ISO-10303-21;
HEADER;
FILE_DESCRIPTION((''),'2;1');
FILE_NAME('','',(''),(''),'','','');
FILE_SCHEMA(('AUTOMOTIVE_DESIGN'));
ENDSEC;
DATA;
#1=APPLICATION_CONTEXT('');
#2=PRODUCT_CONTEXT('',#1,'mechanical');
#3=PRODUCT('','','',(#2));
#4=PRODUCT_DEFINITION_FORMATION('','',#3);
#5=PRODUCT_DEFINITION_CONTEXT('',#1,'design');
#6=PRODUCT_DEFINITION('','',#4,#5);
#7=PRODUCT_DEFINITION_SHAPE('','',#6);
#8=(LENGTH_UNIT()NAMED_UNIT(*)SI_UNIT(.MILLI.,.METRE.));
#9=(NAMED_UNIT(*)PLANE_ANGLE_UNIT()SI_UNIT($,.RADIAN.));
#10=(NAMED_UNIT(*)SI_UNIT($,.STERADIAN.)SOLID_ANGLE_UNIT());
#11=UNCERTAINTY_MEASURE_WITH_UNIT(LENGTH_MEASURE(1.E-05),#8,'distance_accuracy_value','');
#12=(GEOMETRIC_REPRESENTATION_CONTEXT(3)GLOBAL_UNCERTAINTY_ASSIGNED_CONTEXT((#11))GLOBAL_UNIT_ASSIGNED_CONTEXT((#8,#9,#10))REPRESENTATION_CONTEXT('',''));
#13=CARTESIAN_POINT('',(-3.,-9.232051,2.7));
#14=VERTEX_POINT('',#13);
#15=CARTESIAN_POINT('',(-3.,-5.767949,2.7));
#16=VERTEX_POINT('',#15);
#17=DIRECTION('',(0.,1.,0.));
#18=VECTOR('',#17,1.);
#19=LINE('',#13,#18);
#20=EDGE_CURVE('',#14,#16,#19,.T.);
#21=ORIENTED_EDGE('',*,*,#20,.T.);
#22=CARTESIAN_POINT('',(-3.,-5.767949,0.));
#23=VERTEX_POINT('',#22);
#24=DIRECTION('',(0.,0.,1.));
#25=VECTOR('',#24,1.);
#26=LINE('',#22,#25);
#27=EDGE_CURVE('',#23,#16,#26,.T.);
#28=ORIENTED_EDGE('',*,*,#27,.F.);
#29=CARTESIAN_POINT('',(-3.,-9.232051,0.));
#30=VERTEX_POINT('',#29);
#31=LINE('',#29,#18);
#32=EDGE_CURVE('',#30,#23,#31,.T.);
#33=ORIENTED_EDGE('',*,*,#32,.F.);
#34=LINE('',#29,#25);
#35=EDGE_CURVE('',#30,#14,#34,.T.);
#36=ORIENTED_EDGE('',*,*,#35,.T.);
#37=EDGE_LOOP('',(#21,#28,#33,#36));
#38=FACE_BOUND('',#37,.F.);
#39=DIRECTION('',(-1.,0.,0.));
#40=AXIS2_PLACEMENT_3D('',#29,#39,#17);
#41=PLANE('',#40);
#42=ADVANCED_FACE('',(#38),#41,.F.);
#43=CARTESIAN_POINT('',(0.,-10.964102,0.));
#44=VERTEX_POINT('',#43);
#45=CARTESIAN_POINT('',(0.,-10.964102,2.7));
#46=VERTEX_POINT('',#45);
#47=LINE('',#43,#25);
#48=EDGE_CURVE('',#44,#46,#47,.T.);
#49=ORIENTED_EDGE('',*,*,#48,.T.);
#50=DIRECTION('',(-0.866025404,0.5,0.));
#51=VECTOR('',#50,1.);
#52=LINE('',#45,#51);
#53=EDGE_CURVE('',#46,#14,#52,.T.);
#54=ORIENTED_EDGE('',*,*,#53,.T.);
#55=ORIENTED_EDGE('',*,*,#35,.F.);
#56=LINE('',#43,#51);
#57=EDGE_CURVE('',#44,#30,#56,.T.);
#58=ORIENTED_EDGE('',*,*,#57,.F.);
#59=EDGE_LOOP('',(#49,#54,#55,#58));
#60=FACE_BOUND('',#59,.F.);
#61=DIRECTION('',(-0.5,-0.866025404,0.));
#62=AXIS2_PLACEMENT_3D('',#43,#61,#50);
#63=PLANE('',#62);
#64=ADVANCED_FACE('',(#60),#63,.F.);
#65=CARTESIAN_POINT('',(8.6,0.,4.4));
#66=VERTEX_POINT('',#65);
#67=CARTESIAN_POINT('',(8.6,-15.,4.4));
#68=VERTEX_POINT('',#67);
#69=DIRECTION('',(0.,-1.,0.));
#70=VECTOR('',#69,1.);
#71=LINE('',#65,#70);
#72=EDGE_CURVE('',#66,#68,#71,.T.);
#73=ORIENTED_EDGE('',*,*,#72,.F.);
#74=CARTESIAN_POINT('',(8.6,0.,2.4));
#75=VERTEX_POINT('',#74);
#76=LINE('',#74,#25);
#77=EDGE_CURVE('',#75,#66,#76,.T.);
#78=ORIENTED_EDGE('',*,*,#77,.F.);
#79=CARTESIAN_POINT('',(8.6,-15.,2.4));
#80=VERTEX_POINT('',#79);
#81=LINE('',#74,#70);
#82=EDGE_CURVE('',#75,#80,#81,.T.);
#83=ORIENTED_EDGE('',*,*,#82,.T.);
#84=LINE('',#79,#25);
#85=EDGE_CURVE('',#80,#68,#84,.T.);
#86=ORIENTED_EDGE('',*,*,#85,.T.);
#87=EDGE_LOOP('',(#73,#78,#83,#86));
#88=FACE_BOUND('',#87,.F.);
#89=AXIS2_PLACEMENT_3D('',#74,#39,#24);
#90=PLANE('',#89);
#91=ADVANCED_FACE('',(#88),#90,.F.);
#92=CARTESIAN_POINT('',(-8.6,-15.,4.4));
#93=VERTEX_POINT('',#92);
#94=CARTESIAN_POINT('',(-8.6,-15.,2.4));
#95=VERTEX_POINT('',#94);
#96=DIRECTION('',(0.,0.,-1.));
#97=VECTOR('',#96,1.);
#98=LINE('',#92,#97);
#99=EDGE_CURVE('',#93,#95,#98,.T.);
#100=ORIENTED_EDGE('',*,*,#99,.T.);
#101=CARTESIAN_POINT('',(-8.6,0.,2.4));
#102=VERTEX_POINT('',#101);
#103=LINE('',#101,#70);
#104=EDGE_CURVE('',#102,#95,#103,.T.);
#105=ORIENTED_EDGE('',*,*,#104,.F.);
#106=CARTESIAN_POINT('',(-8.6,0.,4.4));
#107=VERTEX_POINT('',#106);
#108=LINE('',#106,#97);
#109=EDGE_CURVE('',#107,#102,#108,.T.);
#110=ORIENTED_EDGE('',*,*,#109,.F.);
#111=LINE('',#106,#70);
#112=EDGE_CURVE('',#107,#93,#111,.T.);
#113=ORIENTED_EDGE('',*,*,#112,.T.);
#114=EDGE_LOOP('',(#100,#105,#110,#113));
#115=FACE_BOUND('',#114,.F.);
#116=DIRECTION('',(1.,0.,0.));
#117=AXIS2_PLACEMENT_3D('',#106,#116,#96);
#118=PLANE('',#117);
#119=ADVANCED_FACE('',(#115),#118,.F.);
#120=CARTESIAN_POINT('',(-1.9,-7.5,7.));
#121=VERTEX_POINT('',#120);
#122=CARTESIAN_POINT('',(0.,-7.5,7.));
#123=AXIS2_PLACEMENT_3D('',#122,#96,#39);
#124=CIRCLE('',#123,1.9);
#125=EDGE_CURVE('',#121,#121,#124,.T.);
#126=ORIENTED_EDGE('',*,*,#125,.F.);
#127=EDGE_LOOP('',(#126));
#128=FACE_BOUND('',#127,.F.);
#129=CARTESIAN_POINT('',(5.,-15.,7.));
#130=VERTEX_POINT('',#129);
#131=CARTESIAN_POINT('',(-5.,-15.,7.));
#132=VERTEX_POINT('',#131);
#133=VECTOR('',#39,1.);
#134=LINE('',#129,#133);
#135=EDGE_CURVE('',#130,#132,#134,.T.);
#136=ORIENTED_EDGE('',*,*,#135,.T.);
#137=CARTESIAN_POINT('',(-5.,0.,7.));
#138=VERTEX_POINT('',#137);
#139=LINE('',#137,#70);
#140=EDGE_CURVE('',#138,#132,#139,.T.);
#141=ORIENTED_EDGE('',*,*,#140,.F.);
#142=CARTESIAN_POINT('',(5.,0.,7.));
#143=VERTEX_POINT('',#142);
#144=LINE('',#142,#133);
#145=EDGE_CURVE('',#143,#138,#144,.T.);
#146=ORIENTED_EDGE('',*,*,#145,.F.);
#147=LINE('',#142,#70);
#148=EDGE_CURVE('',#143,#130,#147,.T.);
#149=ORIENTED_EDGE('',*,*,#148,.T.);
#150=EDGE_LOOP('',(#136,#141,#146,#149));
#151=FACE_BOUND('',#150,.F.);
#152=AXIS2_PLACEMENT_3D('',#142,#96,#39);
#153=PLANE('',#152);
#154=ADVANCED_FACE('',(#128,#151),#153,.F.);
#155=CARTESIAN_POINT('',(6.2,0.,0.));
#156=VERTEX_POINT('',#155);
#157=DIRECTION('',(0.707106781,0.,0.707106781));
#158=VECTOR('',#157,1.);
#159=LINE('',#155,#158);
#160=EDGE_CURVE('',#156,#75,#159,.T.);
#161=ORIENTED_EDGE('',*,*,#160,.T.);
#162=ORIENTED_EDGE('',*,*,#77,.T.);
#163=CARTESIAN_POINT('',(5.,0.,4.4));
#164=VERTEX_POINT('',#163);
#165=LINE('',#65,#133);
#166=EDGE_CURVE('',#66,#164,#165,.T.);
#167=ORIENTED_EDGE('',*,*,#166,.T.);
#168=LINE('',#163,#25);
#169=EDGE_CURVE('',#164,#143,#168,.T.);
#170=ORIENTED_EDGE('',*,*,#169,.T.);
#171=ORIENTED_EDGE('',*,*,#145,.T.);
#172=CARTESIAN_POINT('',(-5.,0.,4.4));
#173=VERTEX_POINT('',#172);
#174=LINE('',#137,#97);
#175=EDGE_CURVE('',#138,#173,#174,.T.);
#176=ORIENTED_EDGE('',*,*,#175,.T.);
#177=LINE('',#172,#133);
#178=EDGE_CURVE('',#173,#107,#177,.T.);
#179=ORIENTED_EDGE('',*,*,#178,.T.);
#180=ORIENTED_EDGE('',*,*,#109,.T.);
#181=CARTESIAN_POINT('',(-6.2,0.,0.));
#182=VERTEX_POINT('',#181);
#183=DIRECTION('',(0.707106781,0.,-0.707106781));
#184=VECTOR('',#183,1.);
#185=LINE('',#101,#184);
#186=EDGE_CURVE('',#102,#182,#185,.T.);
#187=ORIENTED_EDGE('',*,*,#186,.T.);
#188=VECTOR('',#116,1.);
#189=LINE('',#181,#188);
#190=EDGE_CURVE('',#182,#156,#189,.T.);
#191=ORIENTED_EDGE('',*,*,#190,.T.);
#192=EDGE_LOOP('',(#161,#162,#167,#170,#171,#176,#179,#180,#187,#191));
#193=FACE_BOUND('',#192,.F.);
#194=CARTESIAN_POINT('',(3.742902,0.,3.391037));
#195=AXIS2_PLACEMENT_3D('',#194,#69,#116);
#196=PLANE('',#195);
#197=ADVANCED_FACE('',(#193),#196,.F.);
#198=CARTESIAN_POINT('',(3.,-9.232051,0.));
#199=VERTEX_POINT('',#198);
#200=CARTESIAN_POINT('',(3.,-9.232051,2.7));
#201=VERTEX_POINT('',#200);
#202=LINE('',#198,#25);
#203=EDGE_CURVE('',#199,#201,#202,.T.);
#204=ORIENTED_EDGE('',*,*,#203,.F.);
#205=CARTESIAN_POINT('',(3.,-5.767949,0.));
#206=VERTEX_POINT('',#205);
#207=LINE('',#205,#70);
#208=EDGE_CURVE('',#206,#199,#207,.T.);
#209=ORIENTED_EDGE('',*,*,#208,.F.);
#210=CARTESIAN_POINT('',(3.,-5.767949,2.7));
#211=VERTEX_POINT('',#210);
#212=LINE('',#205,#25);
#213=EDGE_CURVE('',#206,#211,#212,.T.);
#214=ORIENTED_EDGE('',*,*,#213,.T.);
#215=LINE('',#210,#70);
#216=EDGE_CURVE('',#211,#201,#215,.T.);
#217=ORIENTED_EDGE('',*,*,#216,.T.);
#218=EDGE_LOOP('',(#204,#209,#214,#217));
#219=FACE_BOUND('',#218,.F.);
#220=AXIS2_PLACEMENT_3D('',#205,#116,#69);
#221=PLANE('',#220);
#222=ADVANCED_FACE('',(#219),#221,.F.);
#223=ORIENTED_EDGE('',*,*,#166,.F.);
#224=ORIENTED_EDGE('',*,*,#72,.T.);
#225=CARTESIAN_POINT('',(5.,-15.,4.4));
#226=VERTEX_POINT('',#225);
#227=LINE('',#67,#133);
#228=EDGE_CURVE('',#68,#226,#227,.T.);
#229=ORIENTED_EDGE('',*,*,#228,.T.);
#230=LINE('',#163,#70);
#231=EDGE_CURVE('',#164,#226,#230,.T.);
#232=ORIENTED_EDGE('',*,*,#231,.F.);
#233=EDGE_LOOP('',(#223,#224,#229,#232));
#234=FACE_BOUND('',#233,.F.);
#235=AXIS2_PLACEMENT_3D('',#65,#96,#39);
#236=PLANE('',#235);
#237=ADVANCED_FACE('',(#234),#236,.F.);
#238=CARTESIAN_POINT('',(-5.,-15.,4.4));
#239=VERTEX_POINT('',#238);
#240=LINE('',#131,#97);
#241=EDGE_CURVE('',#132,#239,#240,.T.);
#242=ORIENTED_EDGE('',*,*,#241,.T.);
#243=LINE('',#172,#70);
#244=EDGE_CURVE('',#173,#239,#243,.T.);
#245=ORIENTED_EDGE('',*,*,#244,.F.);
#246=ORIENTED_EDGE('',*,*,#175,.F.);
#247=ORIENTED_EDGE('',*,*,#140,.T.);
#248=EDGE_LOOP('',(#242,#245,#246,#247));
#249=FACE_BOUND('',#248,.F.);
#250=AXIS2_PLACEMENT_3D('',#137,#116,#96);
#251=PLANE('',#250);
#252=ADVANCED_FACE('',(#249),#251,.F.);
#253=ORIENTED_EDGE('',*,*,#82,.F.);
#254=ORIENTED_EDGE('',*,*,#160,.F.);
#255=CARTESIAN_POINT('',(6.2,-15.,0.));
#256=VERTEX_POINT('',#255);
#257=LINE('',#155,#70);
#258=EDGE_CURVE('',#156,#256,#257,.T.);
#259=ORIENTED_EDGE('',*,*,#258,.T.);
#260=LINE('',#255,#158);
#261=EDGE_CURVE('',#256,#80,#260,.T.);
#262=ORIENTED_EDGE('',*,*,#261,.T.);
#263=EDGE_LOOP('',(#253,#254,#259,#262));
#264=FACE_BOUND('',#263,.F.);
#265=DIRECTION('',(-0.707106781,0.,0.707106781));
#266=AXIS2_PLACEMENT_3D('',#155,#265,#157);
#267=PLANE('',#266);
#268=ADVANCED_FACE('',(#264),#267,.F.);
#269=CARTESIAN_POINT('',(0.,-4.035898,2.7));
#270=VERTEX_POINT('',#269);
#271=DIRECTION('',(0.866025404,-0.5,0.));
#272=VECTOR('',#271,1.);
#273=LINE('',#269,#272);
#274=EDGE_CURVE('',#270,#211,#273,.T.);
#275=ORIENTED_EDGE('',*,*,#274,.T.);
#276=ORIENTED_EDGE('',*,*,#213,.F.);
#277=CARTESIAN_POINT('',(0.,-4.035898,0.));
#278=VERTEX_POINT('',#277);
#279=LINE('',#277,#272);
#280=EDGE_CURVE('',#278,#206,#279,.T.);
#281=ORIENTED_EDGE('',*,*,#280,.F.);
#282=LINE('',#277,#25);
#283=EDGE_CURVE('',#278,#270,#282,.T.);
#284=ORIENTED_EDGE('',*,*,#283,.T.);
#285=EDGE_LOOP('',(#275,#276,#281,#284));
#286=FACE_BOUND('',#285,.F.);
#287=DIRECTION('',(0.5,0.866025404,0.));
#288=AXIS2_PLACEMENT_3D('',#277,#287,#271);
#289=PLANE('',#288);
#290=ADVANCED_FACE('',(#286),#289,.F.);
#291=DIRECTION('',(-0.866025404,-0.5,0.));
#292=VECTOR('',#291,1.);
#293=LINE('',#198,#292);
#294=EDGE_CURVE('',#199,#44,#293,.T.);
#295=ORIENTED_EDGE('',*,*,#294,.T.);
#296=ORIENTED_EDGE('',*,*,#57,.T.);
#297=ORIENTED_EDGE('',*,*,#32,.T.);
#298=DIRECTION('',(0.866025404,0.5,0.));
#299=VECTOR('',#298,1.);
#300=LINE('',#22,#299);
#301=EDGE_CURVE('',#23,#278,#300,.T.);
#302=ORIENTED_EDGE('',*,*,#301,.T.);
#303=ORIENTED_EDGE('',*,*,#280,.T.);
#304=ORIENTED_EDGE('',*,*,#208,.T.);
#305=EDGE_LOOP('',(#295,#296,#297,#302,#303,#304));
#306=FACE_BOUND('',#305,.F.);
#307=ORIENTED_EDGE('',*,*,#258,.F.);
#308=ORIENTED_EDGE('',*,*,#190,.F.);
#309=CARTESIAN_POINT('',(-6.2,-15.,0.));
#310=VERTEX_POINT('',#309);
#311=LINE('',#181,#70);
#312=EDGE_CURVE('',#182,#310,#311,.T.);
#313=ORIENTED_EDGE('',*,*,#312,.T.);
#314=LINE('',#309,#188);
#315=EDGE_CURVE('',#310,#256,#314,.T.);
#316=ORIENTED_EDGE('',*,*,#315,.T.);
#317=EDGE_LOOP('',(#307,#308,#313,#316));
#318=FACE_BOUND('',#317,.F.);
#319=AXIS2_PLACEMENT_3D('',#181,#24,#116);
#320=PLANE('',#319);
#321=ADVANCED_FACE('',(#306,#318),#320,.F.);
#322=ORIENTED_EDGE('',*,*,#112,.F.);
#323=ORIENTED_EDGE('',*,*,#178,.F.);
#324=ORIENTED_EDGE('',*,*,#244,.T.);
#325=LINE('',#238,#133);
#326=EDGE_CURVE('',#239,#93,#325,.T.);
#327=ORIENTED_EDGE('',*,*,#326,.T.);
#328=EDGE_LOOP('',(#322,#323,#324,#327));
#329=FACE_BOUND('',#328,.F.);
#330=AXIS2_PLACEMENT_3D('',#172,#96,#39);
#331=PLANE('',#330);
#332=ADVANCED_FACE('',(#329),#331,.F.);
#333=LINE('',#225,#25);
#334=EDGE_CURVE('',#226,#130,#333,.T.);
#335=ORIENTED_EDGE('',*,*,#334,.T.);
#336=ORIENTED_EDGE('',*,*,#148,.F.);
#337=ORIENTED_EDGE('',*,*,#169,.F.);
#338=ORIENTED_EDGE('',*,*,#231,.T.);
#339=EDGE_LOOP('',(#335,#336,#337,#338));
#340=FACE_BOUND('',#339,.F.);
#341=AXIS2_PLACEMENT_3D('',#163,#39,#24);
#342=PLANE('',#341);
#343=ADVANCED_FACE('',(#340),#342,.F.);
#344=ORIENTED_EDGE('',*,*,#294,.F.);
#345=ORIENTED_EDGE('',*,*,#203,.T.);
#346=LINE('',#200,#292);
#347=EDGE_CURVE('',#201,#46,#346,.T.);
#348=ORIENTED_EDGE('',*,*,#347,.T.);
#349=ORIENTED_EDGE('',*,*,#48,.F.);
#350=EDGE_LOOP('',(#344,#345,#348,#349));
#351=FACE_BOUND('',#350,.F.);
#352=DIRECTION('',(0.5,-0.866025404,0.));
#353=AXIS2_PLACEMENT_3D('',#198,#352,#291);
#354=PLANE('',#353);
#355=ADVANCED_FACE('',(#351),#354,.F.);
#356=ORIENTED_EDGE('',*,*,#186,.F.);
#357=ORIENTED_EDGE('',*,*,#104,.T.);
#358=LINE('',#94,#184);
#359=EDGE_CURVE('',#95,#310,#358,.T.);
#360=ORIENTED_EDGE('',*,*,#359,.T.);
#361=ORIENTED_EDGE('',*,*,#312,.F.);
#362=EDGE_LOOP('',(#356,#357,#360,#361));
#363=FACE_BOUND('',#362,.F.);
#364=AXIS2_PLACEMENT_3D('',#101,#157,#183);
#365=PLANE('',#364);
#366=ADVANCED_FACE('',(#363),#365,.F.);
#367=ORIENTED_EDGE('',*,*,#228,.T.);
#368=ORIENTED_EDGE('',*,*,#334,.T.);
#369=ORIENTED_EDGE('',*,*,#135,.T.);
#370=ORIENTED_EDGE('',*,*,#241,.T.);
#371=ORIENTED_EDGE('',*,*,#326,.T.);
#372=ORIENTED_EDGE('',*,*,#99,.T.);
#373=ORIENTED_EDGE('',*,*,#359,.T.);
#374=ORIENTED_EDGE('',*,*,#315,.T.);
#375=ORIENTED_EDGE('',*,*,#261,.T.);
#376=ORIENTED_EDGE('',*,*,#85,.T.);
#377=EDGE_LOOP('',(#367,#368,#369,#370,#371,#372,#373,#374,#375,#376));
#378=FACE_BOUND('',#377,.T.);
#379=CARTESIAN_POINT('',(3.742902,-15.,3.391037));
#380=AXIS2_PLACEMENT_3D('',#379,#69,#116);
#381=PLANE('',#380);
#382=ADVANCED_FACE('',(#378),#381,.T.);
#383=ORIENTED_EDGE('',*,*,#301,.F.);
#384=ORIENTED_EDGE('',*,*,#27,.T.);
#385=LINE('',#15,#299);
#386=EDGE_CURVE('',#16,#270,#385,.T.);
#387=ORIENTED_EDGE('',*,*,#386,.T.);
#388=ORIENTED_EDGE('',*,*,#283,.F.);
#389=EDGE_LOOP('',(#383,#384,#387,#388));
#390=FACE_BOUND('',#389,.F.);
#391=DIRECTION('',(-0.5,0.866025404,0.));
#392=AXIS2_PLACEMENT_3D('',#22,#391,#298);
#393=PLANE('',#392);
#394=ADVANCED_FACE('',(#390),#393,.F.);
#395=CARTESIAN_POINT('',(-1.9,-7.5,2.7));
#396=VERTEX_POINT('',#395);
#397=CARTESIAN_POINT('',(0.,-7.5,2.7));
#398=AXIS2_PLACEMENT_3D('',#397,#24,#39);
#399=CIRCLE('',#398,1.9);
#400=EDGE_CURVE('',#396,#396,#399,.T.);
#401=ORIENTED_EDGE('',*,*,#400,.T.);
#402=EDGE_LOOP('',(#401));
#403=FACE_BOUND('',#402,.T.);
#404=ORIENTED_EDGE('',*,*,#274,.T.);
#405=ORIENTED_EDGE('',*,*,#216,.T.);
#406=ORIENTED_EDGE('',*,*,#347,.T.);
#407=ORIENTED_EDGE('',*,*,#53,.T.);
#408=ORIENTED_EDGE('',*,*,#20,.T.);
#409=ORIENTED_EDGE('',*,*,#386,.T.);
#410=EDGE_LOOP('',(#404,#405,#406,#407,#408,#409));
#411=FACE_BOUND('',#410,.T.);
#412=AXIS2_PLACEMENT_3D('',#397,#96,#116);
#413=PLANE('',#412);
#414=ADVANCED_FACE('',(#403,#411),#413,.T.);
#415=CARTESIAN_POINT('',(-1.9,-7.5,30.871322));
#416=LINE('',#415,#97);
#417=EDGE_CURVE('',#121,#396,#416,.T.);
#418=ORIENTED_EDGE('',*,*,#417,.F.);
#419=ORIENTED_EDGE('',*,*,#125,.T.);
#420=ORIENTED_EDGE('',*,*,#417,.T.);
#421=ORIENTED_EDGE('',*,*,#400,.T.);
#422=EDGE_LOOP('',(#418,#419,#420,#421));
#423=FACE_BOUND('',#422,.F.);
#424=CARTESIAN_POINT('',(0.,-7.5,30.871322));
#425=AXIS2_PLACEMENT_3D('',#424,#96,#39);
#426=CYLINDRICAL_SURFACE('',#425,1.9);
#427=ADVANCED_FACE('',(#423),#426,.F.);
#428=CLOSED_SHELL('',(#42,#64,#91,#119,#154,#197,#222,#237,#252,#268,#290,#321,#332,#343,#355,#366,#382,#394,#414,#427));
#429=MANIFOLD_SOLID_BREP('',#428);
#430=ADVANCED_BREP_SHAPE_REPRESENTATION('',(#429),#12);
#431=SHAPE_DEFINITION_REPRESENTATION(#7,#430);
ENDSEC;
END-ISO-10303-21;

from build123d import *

# Parameters (mm, degrees)
F1_DEPTH = 15
F3_D     = 3.8
F4_R     = 1.9
F5_DEPTH = 2.7


with BuildPart() as f1:
    # F0 (on Front) → F1 (new body)
    with BuildSketch(Plane.XZ):
        Polygon((0, 7), (0, 0), (6.2, 0), (8.6, 2.4), (8.6, 4.4), (5, 4.4), (5, 7), align=None)
        Polygon((-8.6, 4.4), (-8.6, 2.4), (-6.2, 0), (0, 0), (0, 7), (-5, 7), (-5, 4.4), align=None)
    extrude(amount=F1_DEPTH)

    # F3 (through all)
    with Locations(Plane.XY.offset(7)):
        with Locations((0, -7.5)):
            Hole(F3_D / 2)

    # F4 (on face) → F5 (cut)
    with BuildSketch(Plane(origin=(0, 0, 0), x_dir=(1, 0, 0), z_dir=(0, 0, -1))):
        Polygon((-3, 5.7679491924), (0, 4.0358983849), (3, 5.7679491924), (3, 9.2320508076), (0, 10.9641016151), (-3, 9.2320508076), align=None)
        with Locations((0, 7.5)):
            Circle(F4_R, mode=Mode.SUBTRACT)
    extrude(amount=-F5_DEPTH, mode=Mode.SUBTRACT)


solid = f1.part
